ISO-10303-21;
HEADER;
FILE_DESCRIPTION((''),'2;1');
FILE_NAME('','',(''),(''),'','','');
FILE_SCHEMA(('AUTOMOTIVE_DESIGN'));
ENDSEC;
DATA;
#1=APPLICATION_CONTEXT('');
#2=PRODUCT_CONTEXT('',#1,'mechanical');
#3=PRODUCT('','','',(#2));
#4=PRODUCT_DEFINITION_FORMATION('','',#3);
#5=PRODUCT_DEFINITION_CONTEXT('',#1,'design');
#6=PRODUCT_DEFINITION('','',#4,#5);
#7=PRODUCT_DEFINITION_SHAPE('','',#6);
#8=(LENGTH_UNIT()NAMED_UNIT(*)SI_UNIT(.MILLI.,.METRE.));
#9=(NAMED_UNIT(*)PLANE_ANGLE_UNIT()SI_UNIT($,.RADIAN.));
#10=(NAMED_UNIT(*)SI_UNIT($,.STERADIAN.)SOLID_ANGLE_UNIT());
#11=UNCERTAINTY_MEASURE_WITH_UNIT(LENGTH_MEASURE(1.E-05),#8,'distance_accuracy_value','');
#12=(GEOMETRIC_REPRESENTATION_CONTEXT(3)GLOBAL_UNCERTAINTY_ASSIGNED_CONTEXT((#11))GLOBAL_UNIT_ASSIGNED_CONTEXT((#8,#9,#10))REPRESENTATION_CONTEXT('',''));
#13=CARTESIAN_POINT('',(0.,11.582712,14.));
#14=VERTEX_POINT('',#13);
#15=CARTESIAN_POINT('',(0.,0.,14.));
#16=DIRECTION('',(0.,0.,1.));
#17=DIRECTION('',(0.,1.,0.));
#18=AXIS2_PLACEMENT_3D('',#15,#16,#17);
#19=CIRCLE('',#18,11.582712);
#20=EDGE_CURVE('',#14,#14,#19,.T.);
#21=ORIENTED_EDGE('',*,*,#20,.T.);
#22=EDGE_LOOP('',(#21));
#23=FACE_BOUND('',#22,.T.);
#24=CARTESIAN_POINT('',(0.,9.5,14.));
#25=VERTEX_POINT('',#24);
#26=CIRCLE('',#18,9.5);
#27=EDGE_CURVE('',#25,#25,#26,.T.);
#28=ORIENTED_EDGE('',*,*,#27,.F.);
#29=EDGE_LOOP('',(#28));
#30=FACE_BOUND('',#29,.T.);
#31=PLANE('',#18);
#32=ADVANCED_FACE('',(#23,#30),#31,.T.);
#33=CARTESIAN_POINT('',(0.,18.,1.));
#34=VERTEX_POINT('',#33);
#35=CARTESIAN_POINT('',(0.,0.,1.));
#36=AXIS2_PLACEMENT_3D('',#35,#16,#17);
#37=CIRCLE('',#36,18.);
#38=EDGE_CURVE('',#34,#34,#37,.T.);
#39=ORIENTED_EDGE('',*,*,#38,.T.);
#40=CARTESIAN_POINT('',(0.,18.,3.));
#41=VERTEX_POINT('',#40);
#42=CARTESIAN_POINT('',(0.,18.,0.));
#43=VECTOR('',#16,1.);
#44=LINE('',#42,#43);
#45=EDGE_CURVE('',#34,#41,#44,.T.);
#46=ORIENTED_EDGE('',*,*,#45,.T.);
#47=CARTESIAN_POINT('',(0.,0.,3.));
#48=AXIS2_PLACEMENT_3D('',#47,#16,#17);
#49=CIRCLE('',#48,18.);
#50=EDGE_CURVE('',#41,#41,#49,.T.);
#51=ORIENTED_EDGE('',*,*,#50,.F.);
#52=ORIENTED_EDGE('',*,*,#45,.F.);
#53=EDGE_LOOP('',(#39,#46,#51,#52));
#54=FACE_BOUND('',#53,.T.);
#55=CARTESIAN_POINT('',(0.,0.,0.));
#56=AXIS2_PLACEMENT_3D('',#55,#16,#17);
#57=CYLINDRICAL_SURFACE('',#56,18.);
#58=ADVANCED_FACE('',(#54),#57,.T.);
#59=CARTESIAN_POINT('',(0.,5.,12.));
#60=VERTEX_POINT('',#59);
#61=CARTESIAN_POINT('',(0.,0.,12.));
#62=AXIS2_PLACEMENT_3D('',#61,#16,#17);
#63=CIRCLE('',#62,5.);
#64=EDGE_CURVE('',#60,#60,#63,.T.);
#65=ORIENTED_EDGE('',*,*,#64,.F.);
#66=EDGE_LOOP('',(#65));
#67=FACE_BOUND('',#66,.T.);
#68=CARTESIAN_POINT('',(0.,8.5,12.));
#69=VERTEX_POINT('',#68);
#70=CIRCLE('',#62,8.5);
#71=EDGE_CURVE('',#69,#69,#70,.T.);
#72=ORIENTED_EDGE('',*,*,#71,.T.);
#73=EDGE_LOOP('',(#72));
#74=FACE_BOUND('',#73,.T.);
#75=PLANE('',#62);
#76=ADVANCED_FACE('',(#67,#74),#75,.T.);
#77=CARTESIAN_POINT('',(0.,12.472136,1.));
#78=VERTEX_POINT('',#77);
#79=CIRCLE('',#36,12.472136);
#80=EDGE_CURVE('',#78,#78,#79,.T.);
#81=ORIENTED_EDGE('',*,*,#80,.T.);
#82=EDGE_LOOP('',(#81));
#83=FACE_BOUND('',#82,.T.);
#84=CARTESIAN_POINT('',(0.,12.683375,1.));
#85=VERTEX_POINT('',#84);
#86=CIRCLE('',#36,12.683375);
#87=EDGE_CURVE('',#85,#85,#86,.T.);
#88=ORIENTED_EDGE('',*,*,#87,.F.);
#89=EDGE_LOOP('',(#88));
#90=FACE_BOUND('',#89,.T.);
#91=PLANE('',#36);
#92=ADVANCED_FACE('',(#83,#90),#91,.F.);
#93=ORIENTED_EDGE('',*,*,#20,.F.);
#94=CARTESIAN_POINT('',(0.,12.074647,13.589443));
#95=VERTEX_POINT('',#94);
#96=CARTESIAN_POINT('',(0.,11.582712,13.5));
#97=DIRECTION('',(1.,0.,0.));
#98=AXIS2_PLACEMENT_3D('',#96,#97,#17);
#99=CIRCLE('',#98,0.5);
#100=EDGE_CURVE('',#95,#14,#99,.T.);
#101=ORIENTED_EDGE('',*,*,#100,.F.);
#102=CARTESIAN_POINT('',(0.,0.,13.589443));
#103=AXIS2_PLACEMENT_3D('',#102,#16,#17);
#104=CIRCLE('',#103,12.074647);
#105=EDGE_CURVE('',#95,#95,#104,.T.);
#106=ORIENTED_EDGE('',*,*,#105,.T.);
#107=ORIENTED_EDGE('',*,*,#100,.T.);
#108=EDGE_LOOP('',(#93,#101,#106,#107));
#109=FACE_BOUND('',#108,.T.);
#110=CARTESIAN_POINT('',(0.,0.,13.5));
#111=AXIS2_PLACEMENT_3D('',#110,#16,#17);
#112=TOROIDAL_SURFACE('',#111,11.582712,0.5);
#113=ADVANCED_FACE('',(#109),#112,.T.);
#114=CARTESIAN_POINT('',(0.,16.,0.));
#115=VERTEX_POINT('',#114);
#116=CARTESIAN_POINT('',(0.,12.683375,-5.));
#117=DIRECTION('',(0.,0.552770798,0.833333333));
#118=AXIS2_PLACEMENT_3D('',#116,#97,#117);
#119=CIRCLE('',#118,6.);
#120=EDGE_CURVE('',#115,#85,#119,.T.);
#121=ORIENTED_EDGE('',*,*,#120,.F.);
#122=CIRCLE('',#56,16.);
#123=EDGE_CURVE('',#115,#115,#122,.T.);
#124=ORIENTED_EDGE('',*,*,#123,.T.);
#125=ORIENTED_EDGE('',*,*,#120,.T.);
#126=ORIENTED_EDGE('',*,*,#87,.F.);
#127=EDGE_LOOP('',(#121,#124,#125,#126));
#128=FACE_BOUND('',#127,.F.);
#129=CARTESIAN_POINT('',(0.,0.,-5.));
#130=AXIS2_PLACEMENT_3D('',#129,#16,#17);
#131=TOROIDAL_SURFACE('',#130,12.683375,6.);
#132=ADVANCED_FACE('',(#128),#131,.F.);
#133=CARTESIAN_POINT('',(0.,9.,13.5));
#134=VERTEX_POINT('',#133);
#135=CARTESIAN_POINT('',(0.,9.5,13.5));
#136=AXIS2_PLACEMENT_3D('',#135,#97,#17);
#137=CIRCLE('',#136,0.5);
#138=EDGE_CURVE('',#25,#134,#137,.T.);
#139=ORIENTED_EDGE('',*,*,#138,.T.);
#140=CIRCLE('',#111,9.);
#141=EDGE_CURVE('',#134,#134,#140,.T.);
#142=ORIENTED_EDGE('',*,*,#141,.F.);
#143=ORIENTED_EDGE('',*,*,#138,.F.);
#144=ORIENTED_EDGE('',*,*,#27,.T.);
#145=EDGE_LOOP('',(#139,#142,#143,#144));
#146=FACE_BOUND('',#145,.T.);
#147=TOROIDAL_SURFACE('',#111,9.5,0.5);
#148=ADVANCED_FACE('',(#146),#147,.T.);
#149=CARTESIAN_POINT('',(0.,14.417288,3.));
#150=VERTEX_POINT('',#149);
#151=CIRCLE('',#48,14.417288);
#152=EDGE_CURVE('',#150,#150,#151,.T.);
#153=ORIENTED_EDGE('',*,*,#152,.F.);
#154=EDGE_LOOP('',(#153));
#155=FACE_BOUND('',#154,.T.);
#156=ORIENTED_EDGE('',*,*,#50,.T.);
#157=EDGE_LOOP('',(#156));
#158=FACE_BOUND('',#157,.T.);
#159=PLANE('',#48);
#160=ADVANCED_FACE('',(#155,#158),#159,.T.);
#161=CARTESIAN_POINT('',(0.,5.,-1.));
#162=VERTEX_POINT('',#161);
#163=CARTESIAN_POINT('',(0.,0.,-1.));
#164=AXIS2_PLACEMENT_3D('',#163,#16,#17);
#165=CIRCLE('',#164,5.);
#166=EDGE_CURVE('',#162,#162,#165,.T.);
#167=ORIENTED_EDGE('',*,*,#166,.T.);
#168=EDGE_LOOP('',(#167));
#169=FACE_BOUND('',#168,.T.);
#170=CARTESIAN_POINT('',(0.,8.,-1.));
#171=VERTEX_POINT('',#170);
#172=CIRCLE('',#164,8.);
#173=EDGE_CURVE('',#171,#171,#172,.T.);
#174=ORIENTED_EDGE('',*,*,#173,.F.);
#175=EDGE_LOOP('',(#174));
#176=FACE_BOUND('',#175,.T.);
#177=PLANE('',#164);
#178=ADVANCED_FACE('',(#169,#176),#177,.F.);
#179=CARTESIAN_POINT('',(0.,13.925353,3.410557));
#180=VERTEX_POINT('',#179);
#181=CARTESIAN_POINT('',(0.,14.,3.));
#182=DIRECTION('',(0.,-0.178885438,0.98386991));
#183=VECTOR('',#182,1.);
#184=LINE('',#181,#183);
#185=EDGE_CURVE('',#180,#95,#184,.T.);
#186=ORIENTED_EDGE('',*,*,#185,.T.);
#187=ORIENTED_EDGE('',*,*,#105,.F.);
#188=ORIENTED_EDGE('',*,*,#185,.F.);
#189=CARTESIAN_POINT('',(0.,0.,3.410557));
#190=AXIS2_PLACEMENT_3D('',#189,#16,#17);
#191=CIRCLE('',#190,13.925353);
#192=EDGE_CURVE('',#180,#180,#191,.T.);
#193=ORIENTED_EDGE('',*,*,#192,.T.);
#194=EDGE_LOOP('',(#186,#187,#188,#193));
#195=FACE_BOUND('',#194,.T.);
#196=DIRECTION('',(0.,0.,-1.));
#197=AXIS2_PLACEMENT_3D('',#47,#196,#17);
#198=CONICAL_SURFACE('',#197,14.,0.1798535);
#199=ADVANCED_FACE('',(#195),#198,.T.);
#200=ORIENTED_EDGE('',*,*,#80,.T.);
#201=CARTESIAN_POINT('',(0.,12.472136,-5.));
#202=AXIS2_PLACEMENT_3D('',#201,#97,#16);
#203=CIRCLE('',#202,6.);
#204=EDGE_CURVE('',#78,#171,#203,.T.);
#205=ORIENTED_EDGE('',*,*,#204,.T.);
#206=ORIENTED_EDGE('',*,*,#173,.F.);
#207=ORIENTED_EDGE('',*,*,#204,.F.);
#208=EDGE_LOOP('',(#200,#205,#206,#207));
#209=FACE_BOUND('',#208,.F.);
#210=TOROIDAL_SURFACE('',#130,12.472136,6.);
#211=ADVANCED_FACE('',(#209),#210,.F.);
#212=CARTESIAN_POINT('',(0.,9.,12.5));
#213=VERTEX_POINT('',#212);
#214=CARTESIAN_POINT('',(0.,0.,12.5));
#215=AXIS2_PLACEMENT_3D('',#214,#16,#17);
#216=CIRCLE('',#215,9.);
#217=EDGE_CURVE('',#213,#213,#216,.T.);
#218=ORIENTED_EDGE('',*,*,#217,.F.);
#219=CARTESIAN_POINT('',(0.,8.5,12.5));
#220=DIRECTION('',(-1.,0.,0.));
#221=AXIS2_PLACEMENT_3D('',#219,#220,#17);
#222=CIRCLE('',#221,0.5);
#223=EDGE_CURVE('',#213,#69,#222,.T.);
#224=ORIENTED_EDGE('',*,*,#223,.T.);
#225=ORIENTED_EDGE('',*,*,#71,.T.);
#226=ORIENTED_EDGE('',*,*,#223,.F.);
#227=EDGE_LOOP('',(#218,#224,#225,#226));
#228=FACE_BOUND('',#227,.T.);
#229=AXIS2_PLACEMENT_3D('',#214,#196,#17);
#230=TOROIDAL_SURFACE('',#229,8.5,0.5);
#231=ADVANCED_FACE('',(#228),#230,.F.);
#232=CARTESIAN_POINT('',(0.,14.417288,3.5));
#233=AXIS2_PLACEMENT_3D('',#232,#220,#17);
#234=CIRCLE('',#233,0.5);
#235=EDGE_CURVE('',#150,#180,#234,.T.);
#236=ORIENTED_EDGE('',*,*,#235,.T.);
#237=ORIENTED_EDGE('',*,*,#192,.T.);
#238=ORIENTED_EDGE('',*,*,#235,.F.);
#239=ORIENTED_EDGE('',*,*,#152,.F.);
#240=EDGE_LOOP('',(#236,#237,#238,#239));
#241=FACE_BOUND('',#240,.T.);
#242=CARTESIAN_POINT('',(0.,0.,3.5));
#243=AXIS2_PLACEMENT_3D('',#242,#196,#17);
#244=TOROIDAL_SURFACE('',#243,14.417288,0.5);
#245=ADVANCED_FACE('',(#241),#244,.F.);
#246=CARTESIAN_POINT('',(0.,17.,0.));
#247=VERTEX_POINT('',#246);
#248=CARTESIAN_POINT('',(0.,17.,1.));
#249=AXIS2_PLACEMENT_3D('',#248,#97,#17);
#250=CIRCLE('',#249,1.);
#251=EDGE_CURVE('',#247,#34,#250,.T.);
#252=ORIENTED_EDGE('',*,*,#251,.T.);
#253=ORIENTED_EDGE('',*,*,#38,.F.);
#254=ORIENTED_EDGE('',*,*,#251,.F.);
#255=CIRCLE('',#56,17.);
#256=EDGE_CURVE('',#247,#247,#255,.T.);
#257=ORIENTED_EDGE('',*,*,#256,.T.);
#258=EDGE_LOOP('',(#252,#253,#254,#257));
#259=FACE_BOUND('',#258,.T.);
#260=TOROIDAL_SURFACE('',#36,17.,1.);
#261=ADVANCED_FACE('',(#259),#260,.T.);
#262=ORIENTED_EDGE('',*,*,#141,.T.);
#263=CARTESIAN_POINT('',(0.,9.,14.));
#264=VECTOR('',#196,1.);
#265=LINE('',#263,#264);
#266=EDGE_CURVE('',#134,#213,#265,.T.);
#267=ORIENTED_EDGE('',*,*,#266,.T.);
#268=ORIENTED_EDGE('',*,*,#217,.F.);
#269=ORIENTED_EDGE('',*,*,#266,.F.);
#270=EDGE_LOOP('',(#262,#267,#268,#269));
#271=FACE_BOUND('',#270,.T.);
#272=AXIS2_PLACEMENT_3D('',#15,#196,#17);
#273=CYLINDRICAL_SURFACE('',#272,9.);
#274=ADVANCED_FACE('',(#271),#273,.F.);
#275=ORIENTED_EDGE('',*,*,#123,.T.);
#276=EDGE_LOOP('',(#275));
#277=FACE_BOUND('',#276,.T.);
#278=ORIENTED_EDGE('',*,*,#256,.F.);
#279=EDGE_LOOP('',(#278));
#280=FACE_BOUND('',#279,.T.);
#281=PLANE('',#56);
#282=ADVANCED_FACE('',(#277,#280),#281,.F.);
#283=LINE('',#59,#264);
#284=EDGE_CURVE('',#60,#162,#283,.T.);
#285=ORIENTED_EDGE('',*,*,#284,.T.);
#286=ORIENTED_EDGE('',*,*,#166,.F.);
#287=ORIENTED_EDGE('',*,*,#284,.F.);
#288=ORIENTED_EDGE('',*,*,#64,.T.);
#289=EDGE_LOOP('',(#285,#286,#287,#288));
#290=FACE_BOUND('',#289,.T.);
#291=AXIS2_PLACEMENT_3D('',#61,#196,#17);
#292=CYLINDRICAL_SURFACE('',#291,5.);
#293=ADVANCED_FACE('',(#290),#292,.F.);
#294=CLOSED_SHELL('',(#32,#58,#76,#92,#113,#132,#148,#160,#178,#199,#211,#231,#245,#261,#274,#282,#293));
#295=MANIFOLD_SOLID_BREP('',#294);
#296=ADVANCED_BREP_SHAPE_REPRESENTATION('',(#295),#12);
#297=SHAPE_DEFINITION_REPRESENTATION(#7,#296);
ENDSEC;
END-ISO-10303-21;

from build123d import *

# Parameters (mm, degrees)
F0_W = 3
F0_H = 1
F2_R = 1
F3_R = 0.5


# Not quite as in the source:
# - a fillet or chamfer that OpenCascade refuses, or shapes differently, is made with other operations: its cross-section is extruded or revolved along the edge and cut away or added


with BuildPart() as f1:
    # F0 (on Right) → F1 (revolve)
    with BuildSketch(Plane.YZ):
        Polygon((16, 0), (18, 0), (18, 3), (14, 3), (12, 14), (9, 14), (9, 12), (5, 12), (5, 0), (8, 0), (8, 1), (16, 1), align=None)
        with Locations((6.5, -0.5)):
            Rectangle(F0_W, F0_H)
    revolve(axis=Axis((0, 0, 16.8723911047), (0, 0, 1)))

    # F2
    f2_edges = [f1.edges().sort_by_distance(p)[0] for p in [
        (0, -18, 0),
    ]]
    fillet(f2_edges, radius=F2_R)

    # F3
    f3_edges = [f1.edges().sort_by_distance(p)[0] for p in [
        (0, -12, 14),
        (0, -14, 3),
        (0, -9, 12),
        (0, -9, 14),
    ]]
    fillet(f3_edges, radius=F3_R)

    # F4: fillet of radius 6 on 2 edges, made by hand

    # F4_s1 → F4_t2 (revolve)
    with BuildSketch(Plane.YZ):
        with BuildLine():
            ThreePointArc((12.472135955, 1), (10.0226462122, 0.4772255751), (8, -1))
            Line((8, -1), (8, 1))
            Line((8, 1), (12.472135955, 1))
        make_face()
    revolve(axis=Axis((0, 0, 1), (0, 0, 1)))

    # F4_s3 → F4_t4 (revolve)
    with BuildSketch(Plane.YZ):
        with BuildLine():
            ThreePointArc((16, 0), (14.4154260172, 0.7445626465), (12.6833752096, 1))
            Line((12.6833752096, 1), (16, 1))
            Line((16, 1), (16, 0))
        make_face()
    revolve(axis=Axis((0, 0, 1), (0, 0, 1)))


solid = f1.part
